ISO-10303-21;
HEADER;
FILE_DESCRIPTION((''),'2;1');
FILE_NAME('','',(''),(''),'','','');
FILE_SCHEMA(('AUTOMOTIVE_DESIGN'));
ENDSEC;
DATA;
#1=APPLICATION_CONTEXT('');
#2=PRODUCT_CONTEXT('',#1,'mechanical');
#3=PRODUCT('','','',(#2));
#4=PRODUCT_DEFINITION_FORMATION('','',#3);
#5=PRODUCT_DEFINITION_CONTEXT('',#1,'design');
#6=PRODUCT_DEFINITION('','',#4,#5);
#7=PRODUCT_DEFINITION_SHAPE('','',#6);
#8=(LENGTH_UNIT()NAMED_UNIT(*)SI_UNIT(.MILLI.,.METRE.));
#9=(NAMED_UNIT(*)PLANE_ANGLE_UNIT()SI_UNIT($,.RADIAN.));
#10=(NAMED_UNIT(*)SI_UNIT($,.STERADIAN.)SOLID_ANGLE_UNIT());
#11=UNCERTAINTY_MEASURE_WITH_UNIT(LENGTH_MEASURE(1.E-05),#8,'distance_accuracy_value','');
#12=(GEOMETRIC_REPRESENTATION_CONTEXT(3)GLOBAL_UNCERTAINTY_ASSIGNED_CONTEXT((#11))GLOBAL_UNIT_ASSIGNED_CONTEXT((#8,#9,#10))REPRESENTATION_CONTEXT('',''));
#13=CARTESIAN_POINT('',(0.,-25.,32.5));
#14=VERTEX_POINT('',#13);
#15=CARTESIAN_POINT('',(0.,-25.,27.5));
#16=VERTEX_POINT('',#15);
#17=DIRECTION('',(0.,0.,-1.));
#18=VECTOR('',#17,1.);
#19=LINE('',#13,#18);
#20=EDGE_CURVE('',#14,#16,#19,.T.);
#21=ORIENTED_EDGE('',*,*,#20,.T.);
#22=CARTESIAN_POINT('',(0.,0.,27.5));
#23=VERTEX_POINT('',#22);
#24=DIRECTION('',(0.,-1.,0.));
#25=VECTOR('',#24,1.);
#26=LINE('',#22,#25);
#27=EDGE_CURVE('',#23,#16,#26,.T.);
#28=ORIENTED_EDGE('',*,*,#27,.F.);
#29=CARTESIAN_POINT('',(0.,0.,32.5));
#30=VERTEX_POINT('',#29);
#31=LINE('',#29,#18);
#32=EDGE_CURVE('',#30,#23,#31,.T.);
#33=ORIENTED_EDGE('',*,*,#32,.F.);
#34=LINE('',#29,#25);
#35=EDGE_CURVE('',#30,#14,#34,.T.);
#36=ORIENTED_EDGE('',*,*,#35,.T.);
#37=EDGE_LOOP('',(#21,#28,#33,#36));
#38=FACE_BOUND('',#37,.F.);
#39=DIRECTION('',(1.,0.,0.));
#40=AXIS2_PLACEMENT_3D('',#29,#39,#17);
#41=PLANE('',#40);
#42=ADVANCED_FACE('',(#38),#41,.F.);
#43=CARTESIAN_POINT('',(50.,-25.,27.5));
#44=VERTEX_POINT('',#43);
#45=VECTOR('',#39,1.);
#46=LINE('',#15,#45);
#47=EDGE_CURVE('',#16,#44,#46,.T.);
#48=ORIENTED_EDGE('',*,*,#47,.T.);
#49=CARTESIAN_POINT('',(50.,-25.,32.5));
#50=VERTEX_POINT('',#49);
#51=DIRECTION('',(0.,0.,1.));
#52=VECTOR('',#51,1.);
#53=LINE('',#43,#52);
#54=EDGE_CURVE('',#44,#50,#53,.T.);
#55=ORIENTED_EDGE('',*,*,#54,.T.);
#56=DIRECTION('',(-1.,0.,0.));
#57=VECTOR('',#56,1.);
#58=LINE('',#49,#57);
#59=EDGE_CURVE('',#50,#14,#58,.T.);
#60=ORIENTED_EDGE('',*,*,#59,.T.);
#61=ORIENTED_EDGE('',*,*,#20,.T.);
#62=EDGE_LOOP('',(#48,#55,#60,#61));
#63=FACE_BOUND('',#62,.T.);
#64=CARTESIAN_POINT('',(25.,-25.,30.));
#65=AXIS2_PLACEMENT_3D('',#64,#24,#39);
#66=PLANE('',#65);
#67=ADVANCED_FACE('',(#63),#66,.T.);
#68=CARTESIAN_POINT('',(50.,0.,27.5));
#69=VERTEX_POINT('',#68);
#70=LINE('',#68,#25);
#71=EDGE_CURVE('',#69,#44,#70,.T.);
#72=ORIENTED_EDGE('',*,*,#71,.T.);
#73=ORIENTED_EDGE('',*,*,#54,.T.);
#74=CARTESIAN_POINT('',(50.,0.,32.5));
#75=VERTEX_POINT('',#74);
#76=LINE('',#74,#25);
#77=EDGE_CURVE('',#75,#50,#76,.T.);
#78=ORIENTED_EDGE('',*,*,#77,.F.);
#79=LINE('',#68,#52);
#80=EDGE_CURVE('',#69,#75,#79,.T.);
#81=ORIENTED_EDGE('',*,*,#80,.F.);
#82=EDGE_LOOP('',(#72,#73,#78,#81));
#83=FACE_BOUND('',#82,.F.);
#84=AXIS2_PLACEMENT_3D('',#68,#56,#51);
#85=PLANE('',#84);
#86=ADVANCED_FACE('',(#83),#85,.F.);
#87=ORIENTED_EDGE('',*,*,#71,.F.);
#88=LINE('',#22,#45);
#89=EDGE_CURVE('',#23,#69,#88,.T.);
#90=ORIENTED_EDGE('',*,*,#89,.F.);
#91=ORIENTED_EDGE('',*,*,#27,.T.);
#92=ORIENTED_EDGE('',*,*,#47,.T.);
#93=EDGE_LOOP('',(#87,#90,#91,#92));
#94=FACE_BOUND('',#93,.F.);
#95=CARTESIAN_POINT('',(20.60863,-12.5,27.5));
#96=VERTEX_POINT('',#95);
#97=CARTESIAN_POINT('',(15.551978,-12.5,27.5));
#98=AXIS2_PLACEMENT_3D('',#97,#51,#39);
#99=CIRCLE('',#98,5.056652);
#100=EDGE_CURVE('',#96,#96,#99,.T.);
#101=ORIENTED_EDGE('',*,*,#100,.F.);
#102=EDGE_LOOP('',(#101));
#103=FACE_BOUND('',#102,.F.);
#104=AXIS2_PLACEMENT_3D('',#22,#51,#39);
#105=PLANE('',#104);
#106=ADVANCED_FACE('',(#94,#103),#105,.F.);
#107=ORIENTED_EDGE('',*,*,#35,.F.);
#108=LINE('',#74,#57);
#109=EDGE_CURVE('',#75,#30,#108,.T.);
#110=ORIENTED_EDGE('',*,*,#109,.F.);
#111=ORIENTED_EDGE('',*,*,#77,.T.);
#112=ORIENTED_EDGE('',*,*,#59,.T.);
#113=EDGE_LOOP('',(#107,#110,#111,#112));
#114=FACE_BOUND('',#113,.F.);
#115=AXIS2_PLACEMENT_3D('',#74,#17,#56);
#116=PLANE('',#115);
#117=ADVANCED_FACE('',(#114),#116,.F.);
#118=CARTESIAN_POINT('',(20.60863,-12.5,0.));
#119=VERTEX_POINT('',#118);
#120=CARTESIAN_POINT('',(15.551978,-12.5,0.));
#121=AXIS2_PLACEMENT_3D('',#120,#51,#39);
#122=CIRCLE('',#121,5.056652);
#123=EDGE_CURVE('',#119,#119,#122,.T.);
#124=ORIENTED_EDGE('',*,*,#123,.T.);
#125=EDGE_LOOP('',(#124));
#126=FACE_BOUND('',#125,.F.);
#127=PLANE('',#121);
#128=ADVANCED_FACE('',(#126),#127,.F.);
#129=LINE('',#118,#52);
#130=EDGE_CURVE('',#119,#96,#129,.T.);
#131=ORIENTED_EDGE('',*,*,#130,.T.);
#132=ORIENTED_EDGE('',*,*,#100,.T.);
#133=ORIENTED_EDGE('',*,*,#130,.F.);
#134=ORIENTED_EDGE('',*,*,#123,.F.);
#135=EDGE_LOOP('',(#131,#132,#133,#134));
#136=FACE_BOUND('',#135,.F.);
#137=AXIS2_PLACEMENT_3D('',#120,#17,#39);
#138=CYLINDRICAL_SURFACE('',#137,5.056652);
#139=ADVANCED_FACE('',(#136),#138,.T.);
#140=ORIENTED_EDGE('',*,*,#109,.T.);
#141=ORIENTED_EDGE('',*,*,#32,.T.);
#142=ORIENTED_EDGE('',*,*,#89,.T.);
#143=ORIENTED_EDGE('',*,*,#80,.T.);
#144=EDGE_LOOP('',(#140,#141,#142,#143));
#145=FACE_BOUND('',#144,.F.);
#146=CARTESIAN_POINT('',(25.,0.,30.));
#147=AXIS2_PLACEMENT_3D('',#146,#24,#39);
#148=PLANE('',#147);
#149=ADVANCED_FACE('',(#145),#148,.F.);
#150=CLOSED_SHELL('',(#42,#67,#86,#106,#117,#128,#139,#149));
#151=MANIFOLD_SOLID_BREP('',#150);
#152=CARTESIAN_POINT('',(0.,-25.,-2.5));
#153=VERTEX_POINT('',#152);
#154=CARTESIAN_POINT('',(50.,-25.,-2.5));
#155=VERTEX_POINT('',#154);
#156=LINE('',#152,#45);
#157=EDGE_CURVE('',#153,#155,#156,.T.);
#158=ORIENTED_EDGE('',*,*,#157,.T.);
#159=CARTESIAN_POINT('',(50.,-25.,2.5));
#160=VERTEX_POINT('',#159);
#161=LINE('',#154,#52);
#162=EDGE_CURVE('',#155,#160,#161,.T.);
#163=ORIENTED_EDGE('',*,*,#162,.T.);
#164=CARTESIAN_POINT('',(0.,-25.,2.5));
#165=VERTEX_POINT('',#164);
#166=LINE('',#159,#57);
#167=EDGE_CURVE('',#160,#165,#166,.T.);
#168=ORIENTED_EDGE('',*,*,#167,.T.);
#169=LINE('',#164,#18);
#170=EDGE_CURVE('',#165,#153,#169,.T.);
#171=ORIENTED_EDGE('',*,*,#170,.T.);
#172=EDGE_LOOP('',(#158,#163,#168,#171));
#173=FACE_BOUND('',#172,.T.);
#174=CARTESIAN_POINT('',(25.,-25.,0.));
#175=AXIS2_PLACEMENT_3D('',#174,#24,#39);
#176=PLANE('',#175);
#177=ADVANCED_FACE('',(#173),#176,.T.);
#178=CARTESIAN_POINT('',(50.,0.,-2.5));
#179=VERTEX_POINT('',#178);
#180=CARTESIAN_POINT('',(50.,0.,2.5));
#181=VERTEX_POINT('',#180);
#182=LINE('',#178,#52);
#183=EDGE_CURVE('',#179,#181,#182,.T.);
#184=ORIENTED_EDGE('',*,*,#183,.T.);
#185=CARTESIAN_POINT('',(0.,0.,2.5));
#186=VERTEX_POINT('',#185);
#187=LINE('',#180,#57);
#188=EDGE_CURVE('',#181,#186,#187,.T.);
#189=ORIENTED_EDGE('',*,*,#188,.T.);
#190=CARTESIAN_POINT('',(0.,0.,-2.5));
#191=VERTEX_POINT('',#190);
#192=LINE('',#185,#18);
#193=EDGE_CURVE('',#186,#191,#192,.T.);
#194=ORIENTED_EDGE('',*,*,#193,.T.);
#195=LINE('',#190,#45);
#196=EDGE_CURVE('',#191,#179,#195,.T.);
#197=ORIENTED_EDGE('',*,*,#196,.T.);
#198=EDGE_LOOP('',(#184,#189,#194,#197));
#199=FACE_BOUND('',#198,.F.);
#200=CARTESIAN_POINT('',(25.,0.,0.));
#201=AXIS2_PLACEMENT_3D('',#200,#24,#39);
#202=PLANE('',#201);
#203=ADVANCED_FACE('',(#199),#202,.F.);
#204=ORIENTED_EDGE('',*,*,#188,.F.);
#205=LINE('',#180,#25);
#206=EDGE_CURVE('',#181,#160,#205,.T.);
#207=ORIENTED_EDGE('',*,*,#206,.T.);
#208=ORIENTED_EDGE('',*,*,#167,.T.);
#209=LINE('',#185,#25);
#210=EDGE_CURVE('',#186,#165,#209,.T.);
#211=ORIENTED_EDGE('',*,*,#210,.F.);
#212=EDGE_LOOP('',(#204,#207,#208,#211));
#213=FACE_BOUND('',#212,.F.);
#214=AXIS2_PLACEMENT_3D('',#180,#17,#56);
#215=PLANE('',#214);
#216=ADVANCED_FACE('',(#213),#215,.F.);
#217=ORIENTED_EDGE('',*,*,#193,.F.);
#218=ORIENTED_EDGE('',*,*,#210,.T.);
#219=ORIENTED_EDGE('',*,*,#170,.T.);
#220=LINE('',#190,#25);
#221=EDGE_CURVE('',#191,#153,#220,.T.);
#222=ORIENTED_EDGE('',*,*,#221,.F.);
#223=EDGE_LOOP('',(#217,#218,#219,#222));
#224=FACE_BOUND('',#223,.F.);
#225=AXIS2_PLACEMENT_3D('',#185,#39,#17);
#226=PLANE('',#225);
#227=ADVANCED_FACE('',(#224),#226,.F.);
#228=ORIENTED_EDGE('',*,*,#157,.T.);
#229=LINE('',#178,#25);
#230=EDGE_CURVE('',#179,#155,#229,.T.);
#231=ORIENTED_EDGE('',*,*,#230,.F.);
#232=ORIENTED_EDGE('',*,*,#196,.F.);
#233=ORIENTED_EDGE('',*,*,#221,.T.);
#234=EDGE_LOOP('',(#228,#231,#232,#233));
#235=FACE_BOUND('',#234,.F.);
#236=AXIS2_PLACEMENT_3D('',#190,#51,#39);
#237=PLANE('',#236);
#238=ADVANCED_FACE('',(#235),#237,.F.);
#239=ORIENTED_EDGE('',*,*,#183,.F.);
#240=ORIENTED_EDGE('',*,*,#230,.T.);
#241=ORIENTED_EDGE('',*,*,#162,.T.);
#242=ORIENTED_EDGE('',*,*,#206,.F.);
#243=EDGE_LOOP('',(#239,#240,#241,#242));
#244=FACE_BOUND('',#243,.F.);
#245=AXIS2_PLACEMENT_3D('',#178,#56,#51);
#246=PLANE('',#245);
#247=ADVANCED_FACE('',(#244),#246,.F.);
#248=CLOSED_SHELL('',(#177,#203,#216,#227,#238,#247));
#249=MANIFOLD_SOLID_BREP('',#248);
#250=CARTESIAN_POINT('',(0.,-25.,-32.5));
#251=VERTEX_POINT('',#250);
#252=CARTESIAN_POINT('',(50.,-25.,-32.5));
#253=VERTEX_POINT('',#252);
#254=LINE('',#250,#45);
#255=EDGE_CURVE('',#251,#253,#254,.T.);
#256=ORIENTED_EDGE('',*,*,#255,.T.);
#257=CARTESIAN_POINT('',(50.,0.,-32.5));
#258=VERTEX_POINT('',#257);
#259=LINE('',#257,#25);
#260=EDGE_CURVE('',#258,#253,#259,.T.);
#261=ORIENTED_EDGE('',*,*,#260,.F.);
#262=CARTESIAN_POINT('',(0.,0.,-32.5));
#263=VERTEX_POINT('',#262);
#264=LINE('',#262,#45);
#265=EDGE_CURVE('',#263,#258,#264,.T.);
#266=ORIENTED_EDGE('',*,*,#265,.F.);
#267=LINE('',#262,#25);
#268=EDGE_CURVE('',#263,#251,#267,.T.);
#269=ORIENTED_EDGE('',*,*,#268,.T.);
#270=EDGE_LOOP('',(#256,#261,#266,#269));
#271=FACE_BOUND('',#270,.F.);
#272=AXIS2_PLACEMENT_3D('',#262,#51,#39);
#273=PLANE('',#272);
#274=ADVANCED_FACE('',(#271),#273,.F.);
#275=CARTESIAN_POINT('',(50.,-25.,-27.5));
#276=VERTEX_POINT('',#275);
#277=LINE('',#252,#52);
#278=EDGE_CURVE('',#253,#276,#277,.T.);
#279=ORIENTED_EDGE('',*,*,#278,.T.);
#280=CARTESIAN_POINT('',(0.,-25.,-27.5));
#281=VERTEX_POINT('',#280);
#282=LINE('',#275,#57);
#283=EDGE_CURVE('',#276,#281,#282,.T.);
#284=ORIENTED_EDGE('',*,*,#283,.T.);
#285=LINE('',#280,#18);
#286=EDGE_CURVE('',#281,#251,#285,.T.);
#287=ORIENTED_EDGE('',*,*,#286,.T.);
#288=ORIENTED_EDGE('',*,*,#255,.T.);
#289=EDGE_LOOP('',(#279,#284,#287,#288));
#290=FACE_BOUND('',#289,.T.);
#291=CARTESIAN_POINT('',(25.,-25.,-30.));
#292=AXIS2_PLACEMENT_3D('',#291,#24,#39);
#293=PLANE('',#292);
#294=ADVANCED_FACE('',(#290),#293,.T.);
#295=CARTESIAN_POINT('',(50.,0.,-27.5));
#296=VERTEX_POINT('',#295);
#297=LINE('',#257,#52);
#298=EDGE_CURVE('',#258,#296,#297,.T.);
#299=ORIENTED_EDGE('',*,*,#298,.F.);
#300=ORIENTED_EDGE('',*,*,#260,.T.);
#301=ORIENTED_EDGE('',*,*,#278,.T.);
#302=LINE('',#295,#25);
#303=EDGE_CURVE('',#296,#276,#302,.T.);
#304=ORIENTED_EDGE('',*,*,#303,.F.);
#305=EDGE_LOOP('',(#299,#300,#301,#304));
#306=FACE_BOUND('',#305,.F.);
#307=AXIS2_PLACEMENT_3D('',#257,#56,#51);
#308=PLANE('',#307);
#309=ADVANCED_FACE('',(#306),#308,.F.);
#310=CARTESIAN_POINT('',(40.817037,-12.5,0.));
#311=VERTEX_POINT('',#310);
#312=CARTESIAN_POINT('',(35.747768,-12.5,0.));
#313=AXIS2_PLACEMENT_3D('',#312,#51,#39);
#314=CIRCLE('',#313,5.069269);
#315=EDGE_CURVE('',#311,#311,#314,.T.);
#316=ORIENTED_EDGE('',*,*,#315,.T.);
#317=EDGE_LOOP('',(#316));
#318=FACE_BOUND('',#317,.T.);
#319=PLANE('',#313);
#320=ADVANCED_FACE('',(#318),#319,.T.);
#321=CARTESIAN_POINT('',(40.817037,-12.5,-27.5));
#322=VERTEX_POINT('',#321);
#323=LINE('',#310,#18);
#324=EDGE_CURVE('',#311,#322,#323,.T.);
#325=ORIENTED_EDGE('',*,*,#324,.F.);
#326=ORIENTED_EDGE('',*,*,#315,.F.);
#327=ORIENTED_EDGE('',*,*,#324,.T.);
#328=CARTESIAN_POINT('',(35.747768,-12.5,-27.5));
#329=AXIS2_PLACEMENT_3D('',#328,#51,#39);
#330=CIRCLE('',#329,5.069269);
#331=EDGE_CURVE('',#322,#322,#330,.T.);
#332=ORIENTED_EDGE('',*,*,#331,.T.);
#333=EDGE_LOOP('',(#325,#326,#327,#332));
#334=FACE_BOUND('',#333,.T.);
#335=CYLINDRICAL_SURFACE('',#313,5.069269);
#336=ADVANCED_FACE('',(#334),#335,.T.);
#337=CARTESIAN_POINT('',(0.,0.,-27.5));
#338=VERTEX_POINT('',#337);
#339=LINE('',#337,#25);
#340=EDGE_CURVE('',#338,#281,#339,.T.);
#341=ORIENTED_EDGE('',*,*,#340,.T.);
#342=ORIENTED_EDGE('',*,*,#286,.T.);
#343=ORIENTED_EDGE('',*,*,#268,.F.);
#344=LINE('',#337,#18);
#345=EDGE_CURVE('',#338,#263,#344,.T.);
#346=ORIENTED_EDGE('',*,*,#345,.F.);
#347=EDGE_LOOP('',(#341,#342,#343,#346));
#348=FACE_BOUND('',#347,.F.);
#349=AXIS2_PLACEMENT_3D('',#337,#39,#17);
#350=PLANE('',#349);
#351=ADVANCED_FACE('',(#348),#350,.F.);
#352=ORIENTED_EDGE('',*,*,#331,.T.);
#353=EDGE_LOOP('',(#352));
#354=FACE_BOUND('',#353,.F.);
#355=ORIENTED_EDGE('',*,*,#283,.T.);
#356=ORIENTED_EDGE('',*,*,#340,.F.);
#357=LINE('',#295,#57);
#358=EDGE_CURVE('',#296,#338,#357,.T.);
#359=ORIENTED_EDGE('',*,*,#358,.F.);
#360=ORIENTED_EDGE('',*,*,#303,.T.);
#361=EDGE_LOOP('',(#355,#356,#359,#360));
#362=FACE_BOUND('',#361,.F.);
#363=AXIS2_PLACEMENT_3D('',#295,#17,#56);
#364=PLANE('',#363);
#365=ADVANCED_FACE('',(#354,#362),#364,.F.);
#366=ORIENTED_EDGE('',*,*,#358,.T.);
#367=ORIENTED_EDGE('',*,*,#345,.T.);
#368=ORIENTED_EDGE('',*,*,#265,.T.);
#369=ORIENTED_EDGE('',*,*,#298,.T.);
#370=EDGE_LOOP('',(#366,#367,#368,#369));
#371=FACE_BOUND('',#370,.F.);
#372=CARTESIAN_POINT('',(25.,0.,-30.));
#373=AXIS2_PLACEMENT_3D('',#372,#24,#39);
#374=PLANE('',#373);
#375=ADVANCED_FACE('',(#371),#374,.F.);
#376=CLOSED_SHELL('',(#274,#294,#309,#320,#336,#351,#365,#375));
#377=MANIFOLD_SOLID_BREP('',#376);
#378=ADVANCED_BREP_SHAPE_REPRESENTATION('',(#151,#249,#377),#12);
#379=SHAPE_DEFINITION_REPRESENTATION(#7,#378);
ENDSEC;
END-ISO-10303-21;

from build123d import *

# Parameters (mm, degrees)
F1_DEPTH = 25
F2_DEPTH = 25
F3_DEPTH = 25
F4_R     = 5.0692688019
F5_DEPTH = 27.5
F4_R_2   = 5.0566520552
F6_DEPTH = 27.5


with BuildPart() as f1:
    # F0 (on Front) → F1 (new body)
    with BuildSketch(Plane.XZ):
        Polygon((0, -27.5), (0, -32.5), (50, -32.5), (50, -27.5), (5, -27.5), align=None)
    extrude(amount=F1_DEPTH)

    # F4 (on Top) → F5 (join, through all)
    with BuildSketch(Plane.XY):
        with Locations((35.7477681773, -12.5000000002)):
            Circle(F4_R)
    extrude(amount=-F5_DEPTH)


with BuildPart() as f2:
    # F0 (on Front) → F2 (new body, through all)
    with BuildSketch(Plane.XZ):
        Polygon((0, 2.5), (0, -2.5), (5, -2.5), (50, -2.5), (50, 2.5), (5, 2.5), align=None)
    extrude(amount=F2_DEPTH)


with BuildPart() as f3:
    # F0 (on Front) → F3 (new body, through all)
    with BuildSketch(Plane.XZ):
        Polygon((0, 32.5), (0, 27.5), (5, 27.5), (50, 27.5), (50, 32.5), align=None)
    extrude(amount=F3_DEPTH)

    # F4 (on Top) → F6 (join, through all)
    with BuildSketch(Plane.XY):
        with Locations((15.5519776108, -12.5000000002)):
            Circle(F4_R_2)
    extrude(amount=F6_DEPTH)


solid = Compound([f1.part, f2.part, f3.part])
